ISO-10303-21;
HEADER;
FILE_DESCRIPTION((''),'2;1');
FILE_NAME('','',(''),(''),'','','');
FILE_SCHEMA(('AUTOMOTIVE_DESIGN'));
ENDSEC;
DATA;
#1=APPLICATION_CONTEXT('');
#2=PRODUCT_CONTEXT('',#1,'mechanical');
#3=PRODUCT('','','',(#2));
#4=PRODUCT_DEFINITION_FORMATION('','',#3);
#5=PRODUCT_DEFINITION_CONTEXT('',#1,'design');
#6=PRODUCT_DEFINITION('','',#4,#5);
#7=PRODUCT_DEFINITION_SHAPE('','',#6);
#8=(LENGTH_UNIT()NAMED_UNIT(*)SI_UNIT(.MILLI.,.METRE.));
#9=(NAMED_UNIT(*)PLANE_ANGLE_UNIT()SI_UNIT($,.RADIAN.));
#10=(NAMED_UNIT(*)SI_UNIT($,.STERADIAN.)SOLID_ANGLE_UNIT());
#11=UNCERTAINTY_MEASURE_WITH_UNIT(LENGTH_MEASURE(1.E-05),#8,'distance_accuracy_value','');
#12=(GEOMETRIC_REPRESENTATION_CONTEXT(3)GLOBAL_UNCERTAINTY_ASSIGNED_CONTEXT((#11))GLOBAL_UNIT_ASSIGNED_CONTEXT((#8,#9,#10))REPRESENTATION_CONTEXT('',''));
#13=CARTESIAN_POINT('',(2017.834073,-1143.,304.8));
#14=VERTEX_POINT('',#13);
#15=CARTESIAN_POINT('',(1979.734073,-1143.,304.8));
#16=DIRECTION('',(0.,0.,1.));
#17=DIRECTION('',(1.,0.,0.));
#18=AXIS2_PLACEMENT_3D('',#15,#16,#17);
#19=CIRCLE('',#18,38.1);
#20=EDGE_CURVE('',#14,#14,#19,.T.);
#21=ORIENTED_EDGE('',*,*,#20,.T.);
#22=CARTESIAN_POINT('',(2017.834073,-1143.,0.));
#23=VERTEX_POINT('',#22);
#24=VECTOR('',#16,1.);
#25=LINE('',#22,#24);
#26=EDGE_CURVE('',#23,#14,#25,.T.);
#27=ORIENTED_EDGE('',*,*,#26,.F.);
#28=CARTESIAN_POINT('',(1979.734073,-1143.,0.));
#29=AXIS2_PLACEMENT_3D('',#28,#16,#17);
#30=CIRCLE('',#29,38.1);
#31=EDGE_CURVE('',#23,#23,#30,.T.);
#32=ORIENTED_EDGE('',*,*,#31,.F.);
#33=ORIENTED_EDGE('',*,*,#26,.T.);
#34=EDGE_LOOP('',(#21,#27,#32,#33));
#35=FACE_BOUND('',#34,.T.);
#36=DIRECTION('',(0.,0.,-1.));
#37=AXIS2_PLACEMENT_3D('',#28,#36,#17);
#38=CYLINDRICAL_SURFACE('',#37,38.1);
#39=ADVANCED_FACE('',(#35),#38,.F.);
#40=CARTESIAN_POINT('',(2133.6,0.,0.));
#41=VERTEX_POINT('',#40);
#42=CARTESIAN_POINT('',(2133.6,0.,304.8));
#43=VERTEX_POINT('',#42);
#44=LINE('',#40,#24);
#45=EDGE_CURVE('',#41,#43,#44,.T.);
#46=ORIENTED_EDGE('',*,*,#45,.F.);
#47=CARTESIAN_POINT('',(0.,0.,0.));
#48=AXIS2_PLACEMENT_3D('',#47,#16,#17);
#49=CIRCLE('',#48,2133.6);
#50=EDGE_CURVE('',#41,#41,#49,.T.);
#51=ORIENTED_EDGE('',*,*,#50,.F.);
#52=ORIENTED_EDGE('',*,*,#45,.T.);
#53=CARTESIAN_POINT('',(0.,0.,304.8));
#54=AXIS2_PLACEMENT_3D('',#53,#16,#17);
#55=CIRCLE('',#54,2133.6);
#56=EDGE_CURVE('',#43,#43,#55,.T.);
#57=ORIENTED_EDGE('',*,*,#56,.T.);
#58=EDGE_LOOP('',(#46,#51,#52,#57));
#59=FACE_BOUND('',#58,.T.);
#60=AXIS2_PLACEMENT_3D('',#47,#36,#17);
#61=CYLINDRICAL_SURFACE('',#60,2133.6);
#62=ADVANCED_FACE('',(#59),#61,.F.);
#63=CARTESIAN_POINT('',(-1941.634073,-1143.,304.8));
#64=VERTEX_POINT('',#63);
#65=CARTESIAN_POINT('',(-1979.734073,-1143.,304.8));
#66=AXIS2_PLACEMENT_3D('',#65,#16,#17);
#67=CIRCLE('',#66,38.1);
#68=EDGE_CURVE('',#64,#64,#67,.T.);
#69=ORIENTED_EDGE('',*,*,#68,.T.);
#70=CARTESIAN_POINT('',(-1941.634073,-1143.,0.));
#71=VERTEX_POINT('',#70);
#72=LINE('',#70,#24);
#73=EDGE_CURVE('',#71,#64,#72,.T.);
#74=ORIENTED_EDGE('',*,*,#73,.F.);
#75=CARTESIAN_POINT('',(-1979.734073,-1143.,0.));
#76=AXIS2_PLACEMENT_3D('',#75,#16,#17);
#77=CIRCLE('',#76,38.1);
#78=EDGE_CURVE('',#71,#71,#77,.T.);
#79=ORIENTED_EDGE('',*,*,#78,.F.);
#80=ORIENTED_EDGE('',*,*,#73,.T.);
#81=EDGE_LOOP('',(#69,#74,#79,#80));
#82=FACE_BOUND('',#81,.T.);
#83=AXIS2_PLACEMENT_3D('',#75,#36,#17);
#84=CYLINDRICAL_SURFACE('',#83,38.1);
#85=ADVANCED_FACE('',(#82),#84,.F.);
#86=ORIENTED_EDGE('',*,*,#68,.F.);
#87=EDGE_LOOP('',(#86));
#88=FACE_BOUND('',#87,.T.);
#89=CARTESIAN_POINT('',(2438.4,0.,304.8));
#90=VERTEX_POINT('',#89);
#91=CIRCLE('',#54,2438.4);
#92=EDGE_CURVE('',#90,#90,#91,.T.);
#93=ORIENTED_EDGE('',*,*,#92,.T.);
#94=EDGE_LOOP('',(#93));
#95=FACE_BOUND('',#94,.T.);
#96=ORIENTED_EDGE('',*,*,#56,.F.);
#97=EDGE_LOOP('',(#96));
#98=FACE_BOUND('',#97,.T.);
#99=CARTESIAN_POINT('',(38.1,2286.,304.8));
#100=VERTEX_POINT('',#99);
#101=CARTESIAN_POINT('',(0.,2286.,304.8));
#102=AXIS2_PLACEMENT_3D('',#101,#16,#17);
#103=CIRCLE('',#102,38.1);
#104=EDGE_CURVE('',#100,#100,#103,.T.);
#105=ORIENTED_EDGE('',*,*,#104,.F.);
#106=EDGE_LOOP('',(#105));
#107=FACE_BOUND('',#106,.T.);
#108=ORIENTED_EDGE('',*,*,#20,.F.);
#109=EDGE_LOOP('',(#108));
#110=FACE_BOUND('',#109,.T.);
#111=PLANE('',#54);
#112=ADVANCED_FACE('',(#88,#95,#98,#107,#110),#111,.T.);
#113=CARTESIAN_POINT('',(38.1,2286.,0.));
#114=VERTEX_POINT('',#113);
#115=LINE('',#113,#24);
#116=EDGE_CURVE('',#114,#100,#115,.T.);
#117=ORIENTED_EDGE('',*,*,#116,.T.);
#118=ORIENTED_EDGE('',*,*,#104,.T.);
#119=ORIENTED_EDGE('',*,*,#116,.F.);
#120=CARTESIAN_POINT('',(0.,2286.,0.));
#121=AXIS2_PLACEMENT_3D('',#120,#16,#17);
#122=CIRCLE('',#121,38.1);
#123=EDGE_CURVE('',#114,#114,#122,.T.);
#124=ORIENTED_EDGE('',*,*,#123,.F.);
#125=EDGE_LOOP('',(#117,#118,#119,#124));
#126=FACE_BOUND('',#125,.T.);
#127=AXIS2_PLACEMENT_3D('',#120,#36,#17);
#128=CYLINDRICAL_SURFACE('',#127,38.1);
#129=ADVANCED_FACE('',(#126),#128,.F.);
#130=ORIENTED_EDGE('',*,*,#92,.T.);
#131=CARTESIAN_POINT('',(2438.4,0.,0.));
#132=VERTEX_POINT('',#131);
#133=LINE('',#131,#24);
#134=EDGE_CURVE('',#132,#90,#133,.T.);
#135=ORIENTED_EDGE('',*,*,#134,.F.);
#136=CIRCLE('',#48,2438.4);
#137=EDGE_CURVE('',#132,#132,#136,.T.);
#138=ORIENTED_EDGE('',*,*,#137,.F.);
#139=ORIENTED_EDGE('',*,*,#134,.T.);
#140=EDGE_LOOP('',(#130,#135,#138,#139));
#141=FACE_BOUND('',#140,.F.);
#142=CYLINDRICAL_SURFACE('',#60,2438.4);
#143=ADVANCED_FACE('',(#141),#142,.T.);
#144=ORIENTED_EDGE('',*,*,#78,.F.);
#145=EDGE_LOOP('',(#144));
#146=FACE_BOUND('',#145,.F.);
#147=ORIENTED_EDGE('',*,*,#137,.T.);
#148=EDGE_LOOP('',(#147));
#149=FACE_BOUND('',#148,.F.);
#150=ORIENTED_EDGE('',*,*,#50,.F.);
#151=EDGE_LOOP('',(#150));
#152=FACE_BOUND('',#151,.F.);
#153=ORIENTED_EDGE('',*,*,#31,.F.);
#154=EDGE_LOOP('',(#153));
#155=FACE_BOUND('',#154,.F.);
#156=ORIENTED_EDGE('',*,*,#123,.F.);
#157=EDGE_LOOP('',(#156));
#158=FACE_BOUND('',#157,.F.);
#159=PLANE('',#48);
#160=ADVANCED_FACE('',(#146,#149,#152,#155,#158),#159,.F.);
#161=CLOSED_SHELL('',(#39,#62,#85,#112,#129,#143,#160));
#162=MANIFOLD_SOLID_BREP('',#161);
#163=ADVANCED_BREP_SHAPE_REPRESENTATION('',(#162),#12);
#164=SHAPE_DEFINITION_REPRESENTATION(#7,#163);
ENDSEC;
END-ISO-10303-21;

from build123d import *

# Parameters (mm, degrees)
F0_R     = 2438.4
F0_R_2   = 38.1
F0_R_3   = 2133.6
F1_DEPTH = 304.8


# Not quite as in the source:
# - a feature names something its author has since deleted; it is built from what else it names


with BuildPart() as f1:
    # F0 (on Top) → F1 (new body)
    with BuildSketch(Plane.XY):
        Circle(F0_R)
        with Locations((-1979.7340730512, -1143)):
            Circle(F0_R_2, mode=Mode.SUBTRACT)
        with Locations((1979.7340730512, -1143)):
            Circle(F0_R_2, mode=Mode.SUBTRACT)
        Circle(F0_R_3, mode=Mode.SUBTRACT)
        with Locations((0, 2286)):
            Circle(F0_R_2, mode=Mode.SUBTRACT)
    extrude(amount=F1_DEPTH)


solid = f1.part
